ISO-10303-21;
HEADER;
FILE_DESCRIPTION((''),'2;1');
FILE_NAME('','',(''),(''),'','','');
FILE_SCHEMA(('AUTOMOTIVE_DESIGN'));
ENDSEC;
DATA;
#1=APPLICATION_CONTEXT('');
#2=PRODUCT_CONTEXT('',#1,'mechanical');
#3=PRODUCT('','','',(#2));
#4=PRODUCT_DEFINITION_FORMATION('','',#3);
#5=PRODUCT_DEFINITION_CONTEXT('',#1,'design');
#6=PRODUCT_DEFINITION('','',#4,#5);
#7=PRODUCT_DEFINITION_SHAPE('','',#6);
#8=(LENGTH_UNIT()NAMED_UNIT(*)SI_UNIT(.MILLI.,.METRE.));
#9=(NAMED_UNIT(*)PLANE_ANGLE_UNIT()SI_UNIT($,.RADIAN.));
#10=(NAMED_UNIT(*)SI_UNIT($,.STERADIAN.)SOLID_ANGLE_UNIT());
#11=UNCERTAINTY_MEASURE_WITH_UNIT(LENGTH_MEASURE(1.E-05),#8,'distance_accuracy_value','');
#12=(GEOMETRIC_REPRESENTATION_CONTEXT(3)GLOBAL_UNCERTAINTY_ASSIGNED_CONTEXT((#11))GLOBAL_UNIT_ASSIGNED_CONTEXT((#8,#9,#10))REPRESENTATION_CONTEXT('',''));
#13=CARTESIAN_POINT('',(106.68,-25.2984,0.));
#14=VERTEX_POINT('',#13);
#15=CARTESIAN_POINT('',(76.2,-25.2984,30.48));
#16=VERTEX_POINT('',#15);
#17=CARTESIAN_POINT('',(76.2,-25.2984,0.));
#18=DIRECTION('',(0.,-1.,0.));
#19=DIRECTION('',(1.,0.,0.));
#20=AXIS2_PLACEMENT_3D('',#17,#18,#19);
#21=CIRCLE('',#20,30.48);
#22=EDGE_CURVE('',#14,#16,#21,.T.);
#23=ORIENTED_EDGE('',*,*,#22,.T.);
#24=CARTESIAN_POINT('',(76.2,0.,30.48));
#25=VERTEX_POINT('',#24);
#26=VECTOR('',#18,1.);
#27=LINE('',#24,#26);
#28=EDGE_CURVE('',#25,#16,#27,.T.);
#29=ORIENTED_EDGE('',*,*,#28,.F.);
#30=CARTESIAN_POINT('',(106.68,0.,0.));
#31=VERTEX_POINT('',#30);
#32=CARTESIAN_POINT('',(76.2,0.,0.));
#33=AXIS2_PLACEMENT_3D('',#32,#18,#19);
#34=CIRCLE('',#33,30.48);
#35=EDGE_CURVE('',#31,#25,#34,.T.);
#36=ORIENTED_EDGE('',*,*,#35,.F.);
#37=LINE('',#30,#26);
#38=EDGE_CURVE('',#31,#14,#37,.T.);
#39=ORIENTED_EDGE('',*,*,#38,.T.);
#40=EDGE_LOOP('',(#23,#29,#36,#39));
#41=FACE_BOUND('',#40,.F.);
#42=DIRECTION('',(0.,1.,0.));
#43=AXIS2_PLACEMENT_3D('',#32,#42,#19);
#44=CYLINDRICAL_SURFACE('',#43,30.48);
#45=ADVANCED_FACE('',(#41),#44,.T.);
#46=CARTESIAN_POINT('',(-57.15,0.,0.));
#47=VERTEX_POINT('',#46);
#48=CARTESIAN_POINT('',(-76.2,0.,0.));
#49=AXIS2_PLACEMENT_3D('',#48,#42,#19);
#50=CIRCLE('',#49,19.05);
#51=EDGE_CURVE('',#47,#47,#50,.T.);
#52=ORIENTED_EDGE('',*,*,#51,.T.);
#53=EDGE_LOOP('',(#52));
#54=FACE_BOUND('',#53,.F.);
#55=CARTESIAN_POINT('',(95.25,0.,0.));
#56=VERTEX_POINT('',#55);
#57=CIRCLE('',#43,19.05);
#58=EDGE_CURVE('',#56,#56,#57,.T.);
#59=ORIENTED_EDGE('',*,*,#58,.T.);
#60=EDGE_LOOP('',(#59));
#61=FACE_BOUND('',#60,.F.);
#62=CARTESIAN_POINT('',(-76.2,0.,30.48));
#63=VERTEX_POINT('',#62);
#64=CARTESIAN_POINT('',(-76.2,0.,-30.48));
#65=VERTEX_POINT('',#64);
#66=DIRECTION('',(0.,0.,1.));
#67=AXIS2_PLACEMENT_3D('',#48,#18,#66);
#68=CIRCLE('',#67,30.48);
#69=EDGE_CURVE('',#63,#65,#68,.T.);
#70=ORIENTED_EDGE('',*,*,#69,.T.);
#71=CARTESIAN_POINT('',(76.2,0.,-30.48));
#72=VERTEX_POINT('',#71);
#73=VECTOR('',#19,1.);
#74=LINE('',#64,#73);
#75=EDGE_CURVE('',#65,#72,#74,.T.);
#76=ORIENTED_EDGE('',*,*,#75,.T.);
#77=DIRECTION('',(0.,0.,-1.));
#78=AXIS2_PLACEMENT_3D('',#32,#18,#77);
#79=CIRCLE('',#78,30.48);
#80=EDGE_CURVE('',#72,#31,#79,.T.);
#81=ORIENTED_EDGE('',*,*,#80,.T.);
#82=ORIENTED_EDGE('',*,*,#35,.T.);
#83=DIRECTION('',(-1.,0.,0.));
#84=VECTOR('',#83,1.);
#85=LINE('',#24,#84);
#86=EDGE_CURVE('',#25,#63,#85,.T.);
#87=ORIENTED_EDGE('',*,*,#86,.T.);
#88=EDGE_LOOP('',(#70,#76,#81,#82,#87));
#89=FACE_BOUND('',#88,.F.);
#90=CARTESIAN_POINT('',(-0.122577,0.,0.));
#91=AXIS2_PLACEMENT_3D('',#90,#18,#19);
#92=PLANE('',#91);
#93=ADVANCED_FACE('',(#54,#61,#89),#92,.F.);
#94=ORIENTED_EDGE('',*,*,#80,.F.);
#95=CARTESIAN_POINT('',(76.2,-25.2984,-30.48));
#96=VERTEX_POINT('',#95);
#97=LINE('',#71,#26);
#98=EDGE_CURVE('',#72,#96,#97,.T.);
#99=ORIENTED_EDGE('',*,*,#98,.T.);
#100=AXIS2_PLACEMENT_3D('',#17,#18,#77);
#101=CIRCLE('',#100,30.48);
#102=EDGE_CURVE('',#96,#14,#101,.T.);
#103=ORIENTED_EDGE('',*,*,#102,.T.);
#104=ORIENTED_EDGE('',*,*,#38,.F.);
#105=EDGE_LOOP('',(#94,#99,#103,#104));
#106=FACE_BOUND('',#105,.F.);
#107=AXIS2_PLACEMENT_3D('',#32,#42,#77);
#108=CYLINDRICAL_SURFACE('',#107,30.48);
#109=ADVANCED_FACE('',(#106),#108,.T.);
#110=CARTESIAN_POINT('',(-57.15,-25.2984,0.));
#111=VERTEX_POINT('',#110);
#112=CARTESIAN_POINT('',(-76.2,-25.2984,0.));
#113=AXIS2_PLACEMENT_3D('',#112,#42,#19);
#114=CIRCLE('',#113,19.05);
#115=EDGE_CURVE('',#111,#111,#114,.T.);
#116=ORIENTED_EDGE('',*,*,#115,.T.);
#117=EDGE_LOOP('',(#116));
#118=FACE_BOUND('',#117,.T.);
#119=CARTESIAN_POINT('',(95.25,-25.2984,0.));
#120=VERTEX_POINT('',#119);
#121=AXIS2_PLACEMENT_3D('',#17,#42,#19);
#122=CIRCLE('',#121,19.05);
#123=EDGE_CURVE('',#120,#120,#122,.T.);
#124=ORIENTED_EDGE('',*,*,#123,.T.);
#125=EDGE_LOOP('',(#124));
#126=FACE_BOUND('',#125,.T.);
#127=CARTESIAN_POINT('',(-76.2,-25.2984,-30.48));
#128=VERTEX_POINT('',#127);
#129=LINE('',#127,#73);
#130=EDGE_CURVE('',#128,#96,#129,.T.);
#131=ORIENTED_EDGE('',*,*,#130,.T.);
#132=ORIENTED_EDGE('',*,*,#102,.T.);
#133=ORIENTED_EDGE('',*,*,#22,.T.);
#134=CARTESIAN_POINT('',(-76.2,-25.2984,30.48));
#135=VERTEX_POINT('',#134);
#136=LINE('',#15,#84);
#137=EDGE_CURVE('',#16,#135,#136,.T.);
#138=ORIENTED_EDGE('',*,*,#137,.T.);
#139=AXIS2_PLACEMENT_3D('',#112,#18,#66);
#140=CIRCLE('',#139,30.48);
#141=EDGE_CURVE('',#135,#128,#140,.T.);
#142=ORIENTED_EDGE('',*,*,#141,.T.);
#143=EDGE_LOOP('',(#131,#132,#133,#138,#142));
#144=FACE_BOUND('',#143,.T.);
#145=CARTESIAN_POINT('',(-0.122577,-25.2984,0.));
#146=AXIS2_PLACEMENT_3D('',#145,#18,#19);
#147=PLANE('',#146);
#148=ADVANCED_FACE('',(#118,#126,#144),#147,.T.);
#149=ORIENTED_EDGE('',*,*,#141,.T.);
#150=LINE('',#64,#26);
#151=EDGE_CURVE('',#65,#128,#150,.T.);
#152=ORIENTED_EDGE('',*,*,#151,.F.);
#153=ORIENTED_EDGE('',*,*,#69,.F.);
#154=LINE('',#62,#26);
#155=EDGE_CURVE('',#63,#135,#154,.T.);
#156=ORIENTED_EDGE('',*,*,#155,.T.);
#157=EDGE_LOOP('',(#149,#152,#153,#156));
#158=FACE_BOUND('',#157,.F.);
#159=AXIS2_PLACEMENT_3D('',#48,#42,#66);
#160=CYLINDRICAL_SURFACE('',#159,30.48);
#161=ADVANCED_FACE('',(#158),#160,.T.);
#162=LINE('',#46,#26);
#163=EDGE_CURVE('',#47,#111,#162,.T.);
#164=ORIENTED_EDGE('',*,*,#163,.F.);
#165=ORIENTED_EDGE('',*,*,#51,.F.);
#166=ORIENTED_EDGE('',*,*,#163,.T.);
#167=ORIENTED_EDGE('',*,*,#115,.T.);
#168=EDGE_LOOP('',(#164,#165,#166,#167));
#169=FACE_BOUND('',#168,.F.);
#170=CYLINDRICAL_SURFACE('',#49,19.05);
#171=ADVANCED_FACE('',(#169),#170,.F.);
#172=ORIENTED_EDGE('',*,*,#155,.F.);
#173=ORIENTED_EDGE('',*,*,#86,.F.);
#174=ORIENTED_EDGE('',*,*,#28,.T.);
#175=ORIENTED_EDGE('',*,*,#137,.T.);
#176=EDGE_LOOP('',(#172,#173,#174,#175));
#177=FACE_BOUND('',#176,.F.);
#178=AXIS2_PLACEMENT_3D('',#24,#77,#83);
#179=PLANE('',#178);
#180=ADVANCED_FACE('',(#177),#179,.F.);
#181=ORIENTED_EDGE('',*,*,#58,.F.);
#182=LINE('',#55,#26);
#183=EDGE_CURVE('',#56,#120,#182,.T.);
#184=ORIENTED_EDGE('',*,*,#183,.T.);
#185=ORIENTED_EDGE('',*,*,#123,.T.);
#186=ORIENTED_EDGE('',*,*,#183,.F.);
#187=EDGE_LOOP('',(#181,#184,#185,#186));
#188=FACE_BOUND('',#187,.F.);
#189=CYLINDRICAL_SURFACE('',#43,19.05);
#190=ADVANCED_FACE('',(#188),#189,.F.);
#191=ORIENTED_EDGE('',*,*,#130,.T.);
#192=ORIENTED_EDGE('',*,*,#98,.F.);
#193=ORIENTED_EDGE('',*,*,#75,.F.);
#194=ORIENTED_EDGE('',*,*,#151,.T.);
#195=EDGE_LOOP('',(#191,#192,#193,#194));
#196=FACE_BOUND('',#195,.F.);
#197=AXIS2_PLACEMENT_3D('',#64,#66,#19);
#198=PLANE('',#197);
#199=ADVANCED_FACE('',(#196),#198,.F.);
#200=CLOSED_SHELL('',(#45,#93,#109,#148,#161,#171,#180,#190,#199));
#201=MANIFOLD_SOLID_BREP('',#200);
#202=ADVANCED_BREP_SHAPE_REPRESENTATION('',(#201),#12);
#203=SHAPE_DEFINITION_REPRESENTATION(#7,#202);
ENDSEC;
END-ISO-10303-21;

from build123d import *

# Parameters (mm, degrees)
F1_DEPTH = 25.2984


with BuildPart() as f1:
    # F0 (on Front) → F1 (new body)
    with BuildSketch(Plane.XZ):
        with BuildLine():
            ThreePointArc((76.2, -30.48), (45.72, 0), (76.2, 30.48))
            Line((76.2, 30.48), (-76.2, 30.48))
            ThreePointArc((-76.2, 30.48), (-54.6473853094, 21.5526146906), (-45.72, 0))
            ThreePointArc((-45.72, 0), (-54.6473853094, -21.5526146906), (-76.2, -30.48))
            Line((-76.2, -30.48), (76.2, -30.48))
        make_face()
        with BuildLine():
            ThreePointArc((106.68, 0), (97.7526146906, 21.5526146906), (76.2, 30.48))
            Line((76.2, 30.48), (76.2, 19.05))
            ThreePointArc((76.2, 19.05), (89.6703841816, 13.4703841816), (95.25, 0))
            ThreePointArc((95.25, 0), (89.6703841816, -13.4703841816), (76.2, -19.05))
            Line((76.2, -19.05), (76.2, -30.48))
            ThreePointArc((76.2, -30.48), (97.7526146906, -21.5526146906), (106.68, 0))
        make_face()
        with BuildLine():
            Line((76.2, 19.05), (76.2, 30.48))
            ThreePointArc((76.2, 30.48), (45.72, 0), (76.2, -30.48))
            Line((76.2, -30.48), (76.2, -19.05))
            ThreePointArc((76.2, -19.05), (57.15, 0), (76.2, 19.05))
        make_face()
        with BuildLine():
            ThreePointArc((-45.72, 0), (-54.6473853094, 21.5526146906), (-76.2, 30.48))
            Line((-76.2, 30.48), (-76.2, 19.05))
            ThreePointArc((-76.2, 19.05), (-62.7296158184, 13.4703841816), (-57.15, 0))
            ThreePointArc((-57.15, 0), (-62.7296158184, -13.4703841816), (-76.2, -19.05))
            Line((-76.2, -19.05), (-76.2, -30.48))
            ThreePointArc((-76.2, -30.48), (-54.6473853094, -21.5526146906), (-45.72, 0))
        make_face()
        with BuildLine():
            Line((-76.2, 19.05), (-76.2, 30.48))
            ThreePointArc((-76.2, 30.48), (-106.68, 0), (-76.2, -30.48))
            Line((-76.2, -30.48), (-76.2, -19.05))
            ThreePointArc((-76.2, -19.05), (-95.25, 0), (-76.2, 19.05))
        make_face()
    extrude(amount=F1_DEPTH)


solid = f1.part
